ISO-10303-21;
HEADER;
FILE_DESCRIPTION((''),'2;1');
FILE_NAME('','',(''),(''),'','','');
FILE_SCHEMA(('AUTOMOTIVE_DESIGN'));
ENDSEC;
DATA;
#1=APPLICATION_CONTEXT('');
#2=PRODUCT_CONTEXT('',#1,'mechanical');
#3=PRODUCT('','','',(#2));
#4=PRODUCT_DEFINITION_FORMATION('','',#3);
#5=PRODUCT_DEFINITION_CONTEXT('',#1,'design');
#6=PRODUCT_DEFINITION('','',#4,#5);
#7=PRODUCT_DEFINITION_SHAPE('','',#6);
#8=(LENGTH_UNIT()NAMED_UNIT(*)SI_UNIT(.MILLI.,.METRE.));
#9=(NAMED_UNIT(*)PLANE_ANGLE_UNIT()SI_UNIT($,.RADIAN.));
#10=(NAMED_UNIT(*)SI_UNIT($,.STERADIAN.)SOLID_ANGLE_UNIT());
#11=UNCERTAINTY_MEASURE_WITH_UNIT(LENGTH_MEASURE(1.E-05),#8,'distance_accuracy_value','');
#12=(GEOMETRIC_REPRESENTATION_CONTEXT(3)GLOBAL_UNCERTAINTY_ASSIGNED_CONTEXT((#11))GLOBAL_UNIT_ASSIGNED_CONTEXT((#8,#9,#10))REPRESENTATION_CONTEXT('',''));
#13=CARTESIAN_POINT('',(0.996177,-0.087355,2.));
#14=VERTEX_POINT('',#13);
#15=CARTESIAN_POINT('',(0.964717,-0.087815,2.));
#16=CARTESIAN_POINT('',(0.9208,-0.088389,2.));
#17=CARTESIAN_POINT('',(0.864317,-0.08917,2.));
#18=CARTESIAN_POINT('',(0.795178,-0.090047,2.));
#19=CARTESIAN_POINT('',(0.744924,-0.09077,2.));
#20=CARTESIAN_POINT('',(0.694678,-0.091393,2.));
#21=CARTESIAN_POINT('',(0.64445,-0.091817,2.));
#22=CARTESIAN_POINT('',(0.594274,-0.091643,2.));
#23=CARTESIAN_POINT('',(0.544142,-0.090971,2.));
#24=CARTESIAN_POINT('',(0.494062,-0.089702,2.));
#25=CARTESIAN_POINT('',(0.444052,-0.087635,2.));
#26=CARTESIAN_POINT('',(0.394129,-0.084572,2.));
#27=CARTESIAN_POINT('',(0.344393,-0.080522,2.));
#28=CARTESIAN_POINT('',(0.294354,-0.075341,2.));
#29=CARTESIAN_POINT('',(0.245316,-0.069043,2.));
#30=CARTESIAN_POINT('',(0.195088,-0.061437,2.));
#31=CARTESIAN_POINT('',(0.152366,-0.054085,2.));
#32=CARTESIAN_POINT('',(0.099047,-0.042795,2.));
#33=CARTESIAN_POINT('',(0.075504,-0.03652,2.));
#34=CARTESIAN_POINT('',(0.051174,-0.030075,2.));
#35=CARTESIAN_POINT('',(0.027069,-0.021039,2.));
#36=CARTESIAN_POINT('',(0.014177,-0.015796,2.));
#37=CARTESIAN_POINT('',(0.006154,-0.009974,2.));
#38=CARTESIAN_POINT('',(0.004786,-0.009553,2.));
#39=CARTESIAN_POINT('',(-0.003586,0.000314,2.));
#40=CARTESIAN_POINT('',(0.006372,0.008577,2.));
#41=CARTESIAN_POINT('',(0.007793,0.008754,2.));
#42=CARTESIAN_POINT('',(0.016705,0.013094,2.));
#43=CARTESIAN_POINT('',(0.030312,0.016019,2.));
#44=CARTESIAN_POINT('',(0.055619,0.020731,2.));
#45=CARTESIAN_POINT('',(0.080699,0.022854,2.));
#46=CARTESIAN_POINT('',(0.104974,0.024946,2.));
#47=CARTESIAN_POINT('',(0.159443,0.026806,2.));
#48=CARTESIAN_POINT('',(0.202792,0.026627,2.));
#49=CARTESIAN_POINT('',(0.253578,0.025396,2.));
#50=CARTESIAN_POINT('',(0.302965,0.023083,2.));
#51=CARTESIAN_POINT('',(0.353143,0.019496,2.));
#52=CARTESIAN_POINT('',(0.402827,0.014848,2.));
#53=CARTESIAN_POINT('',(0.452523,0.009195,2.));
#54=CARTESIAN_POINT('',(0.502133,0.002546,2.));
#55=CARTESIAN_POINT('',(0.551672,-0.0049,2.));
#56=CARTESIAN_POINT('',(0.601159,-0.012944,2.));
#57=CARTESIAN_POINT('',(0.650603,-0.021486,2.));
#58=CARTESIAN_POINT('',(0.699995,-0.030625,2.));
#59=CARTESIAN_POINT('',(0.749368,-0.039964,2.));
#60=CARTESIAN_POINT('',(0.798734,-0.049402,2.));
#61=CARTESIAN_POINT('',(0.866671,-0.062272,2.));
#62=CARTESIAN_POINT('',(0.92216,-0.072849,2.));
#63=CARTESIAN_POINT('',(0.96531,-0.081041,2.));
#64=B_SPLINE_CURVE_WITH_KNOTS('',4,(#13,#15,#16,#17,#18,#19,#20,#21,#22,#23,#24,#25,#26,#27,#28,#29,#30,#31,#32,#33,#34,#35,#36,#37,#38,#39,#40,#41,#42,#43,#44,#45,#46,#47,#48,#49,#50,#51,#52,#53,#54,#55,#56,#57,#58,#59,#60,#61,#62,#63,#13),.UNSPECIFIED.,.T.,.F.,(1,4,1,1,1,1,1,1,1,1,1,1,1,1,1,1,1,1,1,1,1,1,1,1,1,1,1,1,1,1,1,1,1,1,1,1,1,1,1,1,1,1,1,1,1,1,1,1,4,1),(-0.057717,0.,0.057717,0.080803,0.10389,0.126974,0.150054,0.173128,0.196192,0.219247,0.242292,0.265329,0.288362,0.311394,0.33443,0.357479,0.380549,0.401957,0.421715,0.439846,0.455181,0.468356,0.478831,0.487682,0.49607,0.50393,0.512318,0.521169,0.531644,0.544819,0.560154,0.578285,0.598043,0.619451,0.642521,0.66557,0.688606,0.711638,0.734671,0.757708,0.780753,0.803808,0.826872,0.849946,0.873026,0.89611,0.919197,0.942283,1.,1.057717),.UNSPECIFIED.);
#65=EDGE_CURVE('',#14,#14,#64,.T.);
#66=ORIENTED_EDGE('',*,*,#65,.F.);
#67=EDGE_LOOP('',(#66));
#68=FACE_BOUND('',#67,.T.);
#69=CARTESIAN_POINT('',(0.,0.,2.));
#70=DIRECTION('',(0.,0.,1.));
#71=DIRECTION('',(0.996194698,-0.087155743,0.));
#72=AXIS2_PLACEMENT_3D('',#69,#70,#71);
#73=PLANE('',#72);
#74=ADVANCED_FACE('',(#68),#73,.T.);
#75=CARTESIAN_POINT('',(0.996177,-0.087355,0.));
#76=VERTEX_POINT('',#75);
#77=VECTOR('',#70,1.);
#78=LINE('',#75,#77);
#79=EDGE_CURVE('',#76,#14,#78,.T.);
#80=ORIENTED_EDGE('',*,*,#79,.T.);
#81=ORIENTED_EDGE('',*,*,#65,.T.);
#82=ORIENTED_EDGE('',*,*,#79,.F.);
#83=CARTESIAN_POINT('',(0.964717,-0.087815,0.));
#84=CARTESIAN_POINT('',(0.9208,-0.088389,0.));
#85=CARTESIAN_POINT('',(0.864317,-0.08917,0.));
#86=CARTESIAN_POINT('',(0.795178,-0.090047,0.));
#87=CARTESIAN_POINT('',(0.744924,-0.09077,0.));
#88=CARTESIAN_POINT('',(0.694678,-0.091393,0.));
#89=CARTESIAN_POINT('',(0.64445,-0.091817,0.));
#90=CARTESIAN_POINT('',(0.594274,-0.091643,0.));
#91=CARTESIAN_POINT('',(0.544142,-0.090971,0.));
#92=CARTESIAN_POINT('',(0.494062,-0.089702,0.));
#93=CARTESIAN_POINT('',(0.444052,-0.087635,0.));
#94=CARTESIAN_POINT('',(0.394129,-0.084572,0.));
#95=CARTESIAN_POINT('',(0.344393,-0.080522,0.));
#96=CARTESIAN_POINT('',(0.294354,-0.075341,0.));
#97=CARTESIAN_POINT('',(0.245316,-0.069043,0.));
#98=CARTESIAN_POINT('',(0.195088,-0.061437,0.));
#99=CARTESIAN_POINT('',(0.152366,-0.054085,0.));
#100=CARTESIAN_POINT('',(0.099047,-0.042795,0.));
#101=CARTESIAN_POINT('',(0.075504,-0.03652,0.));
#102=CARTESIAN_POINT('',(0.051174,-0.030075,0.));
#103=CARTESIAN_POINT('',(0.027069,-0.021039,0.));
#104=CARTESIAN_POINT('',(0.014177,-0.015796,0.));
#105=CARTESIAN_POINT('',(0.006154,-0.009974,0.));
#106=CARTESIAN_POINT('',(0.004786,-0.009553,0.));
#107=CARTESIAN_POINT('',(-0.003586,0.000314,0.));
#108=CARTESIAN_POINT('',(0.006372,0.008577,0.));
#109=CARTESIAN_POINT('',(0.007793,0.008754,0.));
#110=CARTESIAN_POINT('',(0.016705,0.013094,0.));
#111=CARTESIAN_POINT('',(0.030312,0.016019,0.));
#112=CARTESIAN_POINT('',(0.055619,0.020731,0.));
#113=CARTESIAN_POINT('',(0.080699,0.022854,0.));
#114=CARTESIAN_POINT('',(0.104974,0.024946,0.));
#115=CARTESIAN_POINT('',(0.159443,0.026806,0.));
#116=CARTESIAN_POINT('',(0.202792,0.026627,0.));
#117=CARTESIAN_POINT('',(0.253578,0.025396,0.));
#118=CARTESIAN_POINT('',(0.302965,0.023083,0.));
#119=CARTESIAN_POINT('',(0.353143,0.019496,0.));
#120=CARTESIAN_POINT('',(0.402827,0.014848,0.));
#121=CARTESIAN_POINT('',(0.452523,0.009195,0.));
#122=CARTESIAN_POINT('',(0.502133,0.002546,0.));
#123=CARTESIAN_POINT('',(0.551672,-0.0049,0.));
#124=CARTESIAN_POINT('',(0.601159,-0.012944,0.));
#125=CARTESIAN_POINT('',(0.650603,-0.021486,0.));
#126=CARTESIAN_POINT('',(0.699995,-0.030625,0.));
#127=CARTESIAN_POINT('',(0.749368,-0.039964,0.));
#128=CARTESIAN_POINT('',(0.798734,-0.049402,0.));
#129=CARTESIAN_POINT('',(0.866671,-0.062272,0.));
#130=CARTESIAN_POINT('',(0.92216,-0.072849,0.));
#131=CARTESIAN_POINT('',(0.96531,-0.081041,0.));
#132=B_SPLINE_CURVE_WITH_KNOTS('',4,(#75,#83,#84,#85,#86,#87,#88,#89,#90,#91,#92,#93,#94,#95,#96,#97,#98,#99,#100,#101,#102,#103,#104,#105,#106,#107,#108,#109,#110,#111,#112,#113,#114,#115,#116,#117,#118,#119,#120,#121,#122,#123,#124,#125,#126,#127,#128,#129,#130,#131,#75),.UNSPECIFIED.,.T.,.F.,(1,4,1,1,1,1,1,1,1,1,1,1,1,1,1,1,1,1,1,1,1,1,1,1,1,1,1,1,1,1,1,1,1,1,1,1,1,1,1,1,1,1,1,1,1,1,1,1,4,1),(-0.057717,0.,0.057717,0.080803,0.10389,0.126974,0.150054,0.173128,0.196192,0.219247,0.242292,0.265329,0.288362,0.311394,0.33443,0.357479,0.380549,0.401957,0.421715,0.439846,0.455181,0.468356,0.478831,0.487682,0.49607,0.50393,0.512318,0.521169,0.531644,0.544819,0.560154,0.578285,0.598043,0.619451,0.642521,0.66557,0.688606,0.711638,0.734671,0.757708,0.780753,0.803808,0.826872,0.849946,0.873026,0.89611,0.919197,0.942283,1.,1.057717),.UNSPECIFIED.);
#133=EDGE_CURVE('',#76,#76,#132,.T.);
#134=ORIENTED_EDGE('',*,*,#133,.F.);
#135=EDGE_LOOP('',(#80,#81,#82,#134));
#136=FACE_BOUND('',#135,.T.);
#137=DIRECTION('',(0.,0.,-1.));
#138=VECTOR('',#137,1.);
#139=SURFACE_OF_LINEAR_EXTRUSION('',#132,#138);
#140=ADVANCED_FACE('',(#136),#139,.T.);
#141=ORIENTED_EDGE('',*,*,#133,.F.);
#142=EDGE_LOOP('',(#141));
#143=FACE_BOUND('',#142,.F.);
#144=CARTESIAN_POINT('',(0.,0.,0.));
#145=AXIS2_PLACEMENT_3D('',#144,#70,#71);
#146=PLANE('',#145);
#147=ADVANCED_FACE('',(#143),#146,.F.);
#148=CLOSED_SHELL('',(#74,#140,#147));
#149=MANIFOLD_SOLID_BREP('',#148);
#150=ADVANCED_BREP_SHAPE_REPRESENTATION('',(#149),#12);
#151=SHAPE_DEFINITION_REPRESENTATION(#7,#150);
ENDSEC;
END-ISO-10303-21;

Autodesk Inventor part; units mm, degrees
ref_plane "YZ Plane" through (0, 0, 0) normal (1, 0, 0) x (0, 1, 0)
ref_plane "XZ Plane" through (0, 0, 0) normal (0, 1, 0) x (-1, 0, 0)
ref_plane "XY Plane" through (0, 0, 0) normal (0, 0, 1) x (1, 0, 0)
sketch "スケッチ1" plane through (0, 0, 0) normal (0, 0, 1) x (1, 0, 0)
  spline S0 degree 4 poles (1, -0.0002) (0.9687, -0.0034) (0.925, -0.0078) (0.8688, -0.0135) (0.8, -0.0204) (0.75, -0.0255) (0.7, -0.0305) (0.65, -0.0353) (0.6, -0.0395) (0.55, -0.0432) (0.5, -0.0463) (0.45, -0.0486) (0.4, -0.0499) (0.3501, -0.0502) (0.2998, -0.0494) (0.2504, -0.0474) (0.1997, -0.0442) (0.1565, -0.0406) (0.1024, -0.034) (0.0784, -0.0298) (0.0536, -0.0255) (0.0288, -0.0186) (0.0155, -0.0145) (0.007, -0.0094) (0.0056, -0.0091) (-0.0036, 0) (0.0056, 0.0091) (0.007, 0.0094) (0.0155, 0.0145) (0.0288, 0.0186) (0.0536, 0.0255) (0.0784, 0.0298) (0.1024, 0.034) (0.1565, 0.0406) (0.1997, 0.0442) (0.2504, 0.0474) (0.2998, 0.0494) (0.3501, 0.0502) (0.4, 0.0499) (0.45, 0.0486) (0.5, 0.0463) (0.55, 0.0432) (0.6, 0.0395) (0.65, 0.0353) (0.7, 0.0305) (0.75, 0.0255) (0.8, 0.0204) (0.8688, 0.0135) (0.925, 0.0078) (0.9687, 0.0034) (1, 0.0002) knots 0 0 0 0 0 0.057717 0.080803 0.10389 0.126974 0.150054 0.173128 0.196192 0.219247 0.242292 0.265329 0.288362 0.311394 0.33443 0.357479 0.380549 0.401957 0.421715 0.439846 0.455181 0.468356 0.478831 0.487682 0.49607 0.50393 0.512318 0.521169 0.531644 0.544819 0.560154 0.578285 0.598043 0.619451 0.642521 0.66557 0.688606 0.711638 0.734671 0.757708 0.780753 0.803808 0.826872 0.849946 0.873026 0.89611 0.919197 0.942283 1 1 1 1 1
  line L0 (1, 0.0002) -> (1, -0.0002)
  point P0 (0.95, -0.0053)
  point P1 (0.9, -0.0103)
  point P2 (0.85, -0.0154)
  point P3 (0.8, -0.0204)
  point P4 (0.75, -0.0255)
  point P5 (0.7, -0.0304)
  point P6 (0.65, -0.0352)
  point P7 (0.6, -0.0394)
  point P8 (0.55, -0.0431)
  point P9 (0.5, -0.0461)
  point P10 (0.45, -0.0484)
  point P11 (0.4, -0.0497)
  point P12 (0.35, -0.05)
  point P13 (0.3, -0.0491)
  point P14 (0.25, -0.0471)
  point P15 (0.2, -0.044)
  point P16 (0.15, -0.0395)
  point P17 (0.1, -0.0332)
  point P18 (0.075, -0.0292)
  point P19 (0.05, -0.0241)
  point P20 (0.025, -0.0174)
  point P21 (0.0125, -0.0125)
  point P22 (0.0075, -0.0098)
  point P23 (0.005, -0.0082)
  point P24 (0, 0)
  point P25 (0.005, 0.0082)
  point P26 (0.0075, 0.0098)
  point P27 (0.0125, 0.0125)
  point P28 (0.025, 0.0174)
  point P29 (0.05, 0.0241)
  point P30 (0.075, 0.0292)
  point P31 (0.1, 0.0332)
  point P32 (0.15, 0.0395)
  point P33 (0.2, 0.044)
  point P34 (0.25, 0.0471)
  point P35 (0.3, 0.0491)
  point P36 (0.35, 0.05)
  point P37 (0.4, 0.0497)
  point P38 (0.45, 0.0484)
  point P39 (0.5, 0.0461)
  point P40 (0.55, 0.0431)
  point P41 (0.6, 0.0394)
  point P42 (0.65, 0.0352)
  point P43 (0.7, 0.0304)
  point P44 (0.75, 0.0255)
  point P45 (0.8, 0.0204)
  point P46 (0.85, 0.0154)
  point P47 (0.9, 0.0103)
  point P48 (0.95, 0.0053)
extrude "押し出し1" add sketch "スケッチ1" along normal blind 2
sketch "スケッチ2" plane through (0, 0, 2) normal (0, 0, 1) x (1, 0, 0)
  line L0 (-10, 10) -> (10, 10)
  line L1 (10, 10) -> (10, -10)
  line L2 (10, -10) -> (-10, -10)
  line L3 (-10, -10) -> (-10, 10)
  point P0 (0, 0)
  dimension "d2" = 20
  dimension "d3" = 20
  dimension "d5" = 10
  dimension "d12" = 10
surface extrude "押し出しサーフェス1" sketch "スケッチ2" against normal blind 2 shown yes curves L0 L1 L2 L3
sketch "スケッチ3" plane through (-10, 10, 2) normal (0, 1, 0) x (1, 0, 0)
  line L0 (0, 0) -> (20, 0) projected
  line L1 (0, 2) -> (20, 2) projected
  point P0 (10, 2)
surface extrude "押し出しサーフェス2" sketch "スケッチ3" against normal up to surface (20 mm away) shown yes curves L1
sketch "スケッチ4" plane through (-10, 10, 2) normal (0, 1, 0) x (1, 0, 0)
  line L0 (0, 0) -> (20, 0) projected
  point P0 (10, 2)
surface extrude "押し出しサーフェス3" sketch "スケッチ4" against normal up to surface (20 mm away) shown yes curves L0
move or copy body "ボディを移動1" bodies to move or copy 1 copy no rotation origin (0, 0, 0) rotation axis (0, 0, 1) rotation angle -5
properties part number "NACA63-010"
